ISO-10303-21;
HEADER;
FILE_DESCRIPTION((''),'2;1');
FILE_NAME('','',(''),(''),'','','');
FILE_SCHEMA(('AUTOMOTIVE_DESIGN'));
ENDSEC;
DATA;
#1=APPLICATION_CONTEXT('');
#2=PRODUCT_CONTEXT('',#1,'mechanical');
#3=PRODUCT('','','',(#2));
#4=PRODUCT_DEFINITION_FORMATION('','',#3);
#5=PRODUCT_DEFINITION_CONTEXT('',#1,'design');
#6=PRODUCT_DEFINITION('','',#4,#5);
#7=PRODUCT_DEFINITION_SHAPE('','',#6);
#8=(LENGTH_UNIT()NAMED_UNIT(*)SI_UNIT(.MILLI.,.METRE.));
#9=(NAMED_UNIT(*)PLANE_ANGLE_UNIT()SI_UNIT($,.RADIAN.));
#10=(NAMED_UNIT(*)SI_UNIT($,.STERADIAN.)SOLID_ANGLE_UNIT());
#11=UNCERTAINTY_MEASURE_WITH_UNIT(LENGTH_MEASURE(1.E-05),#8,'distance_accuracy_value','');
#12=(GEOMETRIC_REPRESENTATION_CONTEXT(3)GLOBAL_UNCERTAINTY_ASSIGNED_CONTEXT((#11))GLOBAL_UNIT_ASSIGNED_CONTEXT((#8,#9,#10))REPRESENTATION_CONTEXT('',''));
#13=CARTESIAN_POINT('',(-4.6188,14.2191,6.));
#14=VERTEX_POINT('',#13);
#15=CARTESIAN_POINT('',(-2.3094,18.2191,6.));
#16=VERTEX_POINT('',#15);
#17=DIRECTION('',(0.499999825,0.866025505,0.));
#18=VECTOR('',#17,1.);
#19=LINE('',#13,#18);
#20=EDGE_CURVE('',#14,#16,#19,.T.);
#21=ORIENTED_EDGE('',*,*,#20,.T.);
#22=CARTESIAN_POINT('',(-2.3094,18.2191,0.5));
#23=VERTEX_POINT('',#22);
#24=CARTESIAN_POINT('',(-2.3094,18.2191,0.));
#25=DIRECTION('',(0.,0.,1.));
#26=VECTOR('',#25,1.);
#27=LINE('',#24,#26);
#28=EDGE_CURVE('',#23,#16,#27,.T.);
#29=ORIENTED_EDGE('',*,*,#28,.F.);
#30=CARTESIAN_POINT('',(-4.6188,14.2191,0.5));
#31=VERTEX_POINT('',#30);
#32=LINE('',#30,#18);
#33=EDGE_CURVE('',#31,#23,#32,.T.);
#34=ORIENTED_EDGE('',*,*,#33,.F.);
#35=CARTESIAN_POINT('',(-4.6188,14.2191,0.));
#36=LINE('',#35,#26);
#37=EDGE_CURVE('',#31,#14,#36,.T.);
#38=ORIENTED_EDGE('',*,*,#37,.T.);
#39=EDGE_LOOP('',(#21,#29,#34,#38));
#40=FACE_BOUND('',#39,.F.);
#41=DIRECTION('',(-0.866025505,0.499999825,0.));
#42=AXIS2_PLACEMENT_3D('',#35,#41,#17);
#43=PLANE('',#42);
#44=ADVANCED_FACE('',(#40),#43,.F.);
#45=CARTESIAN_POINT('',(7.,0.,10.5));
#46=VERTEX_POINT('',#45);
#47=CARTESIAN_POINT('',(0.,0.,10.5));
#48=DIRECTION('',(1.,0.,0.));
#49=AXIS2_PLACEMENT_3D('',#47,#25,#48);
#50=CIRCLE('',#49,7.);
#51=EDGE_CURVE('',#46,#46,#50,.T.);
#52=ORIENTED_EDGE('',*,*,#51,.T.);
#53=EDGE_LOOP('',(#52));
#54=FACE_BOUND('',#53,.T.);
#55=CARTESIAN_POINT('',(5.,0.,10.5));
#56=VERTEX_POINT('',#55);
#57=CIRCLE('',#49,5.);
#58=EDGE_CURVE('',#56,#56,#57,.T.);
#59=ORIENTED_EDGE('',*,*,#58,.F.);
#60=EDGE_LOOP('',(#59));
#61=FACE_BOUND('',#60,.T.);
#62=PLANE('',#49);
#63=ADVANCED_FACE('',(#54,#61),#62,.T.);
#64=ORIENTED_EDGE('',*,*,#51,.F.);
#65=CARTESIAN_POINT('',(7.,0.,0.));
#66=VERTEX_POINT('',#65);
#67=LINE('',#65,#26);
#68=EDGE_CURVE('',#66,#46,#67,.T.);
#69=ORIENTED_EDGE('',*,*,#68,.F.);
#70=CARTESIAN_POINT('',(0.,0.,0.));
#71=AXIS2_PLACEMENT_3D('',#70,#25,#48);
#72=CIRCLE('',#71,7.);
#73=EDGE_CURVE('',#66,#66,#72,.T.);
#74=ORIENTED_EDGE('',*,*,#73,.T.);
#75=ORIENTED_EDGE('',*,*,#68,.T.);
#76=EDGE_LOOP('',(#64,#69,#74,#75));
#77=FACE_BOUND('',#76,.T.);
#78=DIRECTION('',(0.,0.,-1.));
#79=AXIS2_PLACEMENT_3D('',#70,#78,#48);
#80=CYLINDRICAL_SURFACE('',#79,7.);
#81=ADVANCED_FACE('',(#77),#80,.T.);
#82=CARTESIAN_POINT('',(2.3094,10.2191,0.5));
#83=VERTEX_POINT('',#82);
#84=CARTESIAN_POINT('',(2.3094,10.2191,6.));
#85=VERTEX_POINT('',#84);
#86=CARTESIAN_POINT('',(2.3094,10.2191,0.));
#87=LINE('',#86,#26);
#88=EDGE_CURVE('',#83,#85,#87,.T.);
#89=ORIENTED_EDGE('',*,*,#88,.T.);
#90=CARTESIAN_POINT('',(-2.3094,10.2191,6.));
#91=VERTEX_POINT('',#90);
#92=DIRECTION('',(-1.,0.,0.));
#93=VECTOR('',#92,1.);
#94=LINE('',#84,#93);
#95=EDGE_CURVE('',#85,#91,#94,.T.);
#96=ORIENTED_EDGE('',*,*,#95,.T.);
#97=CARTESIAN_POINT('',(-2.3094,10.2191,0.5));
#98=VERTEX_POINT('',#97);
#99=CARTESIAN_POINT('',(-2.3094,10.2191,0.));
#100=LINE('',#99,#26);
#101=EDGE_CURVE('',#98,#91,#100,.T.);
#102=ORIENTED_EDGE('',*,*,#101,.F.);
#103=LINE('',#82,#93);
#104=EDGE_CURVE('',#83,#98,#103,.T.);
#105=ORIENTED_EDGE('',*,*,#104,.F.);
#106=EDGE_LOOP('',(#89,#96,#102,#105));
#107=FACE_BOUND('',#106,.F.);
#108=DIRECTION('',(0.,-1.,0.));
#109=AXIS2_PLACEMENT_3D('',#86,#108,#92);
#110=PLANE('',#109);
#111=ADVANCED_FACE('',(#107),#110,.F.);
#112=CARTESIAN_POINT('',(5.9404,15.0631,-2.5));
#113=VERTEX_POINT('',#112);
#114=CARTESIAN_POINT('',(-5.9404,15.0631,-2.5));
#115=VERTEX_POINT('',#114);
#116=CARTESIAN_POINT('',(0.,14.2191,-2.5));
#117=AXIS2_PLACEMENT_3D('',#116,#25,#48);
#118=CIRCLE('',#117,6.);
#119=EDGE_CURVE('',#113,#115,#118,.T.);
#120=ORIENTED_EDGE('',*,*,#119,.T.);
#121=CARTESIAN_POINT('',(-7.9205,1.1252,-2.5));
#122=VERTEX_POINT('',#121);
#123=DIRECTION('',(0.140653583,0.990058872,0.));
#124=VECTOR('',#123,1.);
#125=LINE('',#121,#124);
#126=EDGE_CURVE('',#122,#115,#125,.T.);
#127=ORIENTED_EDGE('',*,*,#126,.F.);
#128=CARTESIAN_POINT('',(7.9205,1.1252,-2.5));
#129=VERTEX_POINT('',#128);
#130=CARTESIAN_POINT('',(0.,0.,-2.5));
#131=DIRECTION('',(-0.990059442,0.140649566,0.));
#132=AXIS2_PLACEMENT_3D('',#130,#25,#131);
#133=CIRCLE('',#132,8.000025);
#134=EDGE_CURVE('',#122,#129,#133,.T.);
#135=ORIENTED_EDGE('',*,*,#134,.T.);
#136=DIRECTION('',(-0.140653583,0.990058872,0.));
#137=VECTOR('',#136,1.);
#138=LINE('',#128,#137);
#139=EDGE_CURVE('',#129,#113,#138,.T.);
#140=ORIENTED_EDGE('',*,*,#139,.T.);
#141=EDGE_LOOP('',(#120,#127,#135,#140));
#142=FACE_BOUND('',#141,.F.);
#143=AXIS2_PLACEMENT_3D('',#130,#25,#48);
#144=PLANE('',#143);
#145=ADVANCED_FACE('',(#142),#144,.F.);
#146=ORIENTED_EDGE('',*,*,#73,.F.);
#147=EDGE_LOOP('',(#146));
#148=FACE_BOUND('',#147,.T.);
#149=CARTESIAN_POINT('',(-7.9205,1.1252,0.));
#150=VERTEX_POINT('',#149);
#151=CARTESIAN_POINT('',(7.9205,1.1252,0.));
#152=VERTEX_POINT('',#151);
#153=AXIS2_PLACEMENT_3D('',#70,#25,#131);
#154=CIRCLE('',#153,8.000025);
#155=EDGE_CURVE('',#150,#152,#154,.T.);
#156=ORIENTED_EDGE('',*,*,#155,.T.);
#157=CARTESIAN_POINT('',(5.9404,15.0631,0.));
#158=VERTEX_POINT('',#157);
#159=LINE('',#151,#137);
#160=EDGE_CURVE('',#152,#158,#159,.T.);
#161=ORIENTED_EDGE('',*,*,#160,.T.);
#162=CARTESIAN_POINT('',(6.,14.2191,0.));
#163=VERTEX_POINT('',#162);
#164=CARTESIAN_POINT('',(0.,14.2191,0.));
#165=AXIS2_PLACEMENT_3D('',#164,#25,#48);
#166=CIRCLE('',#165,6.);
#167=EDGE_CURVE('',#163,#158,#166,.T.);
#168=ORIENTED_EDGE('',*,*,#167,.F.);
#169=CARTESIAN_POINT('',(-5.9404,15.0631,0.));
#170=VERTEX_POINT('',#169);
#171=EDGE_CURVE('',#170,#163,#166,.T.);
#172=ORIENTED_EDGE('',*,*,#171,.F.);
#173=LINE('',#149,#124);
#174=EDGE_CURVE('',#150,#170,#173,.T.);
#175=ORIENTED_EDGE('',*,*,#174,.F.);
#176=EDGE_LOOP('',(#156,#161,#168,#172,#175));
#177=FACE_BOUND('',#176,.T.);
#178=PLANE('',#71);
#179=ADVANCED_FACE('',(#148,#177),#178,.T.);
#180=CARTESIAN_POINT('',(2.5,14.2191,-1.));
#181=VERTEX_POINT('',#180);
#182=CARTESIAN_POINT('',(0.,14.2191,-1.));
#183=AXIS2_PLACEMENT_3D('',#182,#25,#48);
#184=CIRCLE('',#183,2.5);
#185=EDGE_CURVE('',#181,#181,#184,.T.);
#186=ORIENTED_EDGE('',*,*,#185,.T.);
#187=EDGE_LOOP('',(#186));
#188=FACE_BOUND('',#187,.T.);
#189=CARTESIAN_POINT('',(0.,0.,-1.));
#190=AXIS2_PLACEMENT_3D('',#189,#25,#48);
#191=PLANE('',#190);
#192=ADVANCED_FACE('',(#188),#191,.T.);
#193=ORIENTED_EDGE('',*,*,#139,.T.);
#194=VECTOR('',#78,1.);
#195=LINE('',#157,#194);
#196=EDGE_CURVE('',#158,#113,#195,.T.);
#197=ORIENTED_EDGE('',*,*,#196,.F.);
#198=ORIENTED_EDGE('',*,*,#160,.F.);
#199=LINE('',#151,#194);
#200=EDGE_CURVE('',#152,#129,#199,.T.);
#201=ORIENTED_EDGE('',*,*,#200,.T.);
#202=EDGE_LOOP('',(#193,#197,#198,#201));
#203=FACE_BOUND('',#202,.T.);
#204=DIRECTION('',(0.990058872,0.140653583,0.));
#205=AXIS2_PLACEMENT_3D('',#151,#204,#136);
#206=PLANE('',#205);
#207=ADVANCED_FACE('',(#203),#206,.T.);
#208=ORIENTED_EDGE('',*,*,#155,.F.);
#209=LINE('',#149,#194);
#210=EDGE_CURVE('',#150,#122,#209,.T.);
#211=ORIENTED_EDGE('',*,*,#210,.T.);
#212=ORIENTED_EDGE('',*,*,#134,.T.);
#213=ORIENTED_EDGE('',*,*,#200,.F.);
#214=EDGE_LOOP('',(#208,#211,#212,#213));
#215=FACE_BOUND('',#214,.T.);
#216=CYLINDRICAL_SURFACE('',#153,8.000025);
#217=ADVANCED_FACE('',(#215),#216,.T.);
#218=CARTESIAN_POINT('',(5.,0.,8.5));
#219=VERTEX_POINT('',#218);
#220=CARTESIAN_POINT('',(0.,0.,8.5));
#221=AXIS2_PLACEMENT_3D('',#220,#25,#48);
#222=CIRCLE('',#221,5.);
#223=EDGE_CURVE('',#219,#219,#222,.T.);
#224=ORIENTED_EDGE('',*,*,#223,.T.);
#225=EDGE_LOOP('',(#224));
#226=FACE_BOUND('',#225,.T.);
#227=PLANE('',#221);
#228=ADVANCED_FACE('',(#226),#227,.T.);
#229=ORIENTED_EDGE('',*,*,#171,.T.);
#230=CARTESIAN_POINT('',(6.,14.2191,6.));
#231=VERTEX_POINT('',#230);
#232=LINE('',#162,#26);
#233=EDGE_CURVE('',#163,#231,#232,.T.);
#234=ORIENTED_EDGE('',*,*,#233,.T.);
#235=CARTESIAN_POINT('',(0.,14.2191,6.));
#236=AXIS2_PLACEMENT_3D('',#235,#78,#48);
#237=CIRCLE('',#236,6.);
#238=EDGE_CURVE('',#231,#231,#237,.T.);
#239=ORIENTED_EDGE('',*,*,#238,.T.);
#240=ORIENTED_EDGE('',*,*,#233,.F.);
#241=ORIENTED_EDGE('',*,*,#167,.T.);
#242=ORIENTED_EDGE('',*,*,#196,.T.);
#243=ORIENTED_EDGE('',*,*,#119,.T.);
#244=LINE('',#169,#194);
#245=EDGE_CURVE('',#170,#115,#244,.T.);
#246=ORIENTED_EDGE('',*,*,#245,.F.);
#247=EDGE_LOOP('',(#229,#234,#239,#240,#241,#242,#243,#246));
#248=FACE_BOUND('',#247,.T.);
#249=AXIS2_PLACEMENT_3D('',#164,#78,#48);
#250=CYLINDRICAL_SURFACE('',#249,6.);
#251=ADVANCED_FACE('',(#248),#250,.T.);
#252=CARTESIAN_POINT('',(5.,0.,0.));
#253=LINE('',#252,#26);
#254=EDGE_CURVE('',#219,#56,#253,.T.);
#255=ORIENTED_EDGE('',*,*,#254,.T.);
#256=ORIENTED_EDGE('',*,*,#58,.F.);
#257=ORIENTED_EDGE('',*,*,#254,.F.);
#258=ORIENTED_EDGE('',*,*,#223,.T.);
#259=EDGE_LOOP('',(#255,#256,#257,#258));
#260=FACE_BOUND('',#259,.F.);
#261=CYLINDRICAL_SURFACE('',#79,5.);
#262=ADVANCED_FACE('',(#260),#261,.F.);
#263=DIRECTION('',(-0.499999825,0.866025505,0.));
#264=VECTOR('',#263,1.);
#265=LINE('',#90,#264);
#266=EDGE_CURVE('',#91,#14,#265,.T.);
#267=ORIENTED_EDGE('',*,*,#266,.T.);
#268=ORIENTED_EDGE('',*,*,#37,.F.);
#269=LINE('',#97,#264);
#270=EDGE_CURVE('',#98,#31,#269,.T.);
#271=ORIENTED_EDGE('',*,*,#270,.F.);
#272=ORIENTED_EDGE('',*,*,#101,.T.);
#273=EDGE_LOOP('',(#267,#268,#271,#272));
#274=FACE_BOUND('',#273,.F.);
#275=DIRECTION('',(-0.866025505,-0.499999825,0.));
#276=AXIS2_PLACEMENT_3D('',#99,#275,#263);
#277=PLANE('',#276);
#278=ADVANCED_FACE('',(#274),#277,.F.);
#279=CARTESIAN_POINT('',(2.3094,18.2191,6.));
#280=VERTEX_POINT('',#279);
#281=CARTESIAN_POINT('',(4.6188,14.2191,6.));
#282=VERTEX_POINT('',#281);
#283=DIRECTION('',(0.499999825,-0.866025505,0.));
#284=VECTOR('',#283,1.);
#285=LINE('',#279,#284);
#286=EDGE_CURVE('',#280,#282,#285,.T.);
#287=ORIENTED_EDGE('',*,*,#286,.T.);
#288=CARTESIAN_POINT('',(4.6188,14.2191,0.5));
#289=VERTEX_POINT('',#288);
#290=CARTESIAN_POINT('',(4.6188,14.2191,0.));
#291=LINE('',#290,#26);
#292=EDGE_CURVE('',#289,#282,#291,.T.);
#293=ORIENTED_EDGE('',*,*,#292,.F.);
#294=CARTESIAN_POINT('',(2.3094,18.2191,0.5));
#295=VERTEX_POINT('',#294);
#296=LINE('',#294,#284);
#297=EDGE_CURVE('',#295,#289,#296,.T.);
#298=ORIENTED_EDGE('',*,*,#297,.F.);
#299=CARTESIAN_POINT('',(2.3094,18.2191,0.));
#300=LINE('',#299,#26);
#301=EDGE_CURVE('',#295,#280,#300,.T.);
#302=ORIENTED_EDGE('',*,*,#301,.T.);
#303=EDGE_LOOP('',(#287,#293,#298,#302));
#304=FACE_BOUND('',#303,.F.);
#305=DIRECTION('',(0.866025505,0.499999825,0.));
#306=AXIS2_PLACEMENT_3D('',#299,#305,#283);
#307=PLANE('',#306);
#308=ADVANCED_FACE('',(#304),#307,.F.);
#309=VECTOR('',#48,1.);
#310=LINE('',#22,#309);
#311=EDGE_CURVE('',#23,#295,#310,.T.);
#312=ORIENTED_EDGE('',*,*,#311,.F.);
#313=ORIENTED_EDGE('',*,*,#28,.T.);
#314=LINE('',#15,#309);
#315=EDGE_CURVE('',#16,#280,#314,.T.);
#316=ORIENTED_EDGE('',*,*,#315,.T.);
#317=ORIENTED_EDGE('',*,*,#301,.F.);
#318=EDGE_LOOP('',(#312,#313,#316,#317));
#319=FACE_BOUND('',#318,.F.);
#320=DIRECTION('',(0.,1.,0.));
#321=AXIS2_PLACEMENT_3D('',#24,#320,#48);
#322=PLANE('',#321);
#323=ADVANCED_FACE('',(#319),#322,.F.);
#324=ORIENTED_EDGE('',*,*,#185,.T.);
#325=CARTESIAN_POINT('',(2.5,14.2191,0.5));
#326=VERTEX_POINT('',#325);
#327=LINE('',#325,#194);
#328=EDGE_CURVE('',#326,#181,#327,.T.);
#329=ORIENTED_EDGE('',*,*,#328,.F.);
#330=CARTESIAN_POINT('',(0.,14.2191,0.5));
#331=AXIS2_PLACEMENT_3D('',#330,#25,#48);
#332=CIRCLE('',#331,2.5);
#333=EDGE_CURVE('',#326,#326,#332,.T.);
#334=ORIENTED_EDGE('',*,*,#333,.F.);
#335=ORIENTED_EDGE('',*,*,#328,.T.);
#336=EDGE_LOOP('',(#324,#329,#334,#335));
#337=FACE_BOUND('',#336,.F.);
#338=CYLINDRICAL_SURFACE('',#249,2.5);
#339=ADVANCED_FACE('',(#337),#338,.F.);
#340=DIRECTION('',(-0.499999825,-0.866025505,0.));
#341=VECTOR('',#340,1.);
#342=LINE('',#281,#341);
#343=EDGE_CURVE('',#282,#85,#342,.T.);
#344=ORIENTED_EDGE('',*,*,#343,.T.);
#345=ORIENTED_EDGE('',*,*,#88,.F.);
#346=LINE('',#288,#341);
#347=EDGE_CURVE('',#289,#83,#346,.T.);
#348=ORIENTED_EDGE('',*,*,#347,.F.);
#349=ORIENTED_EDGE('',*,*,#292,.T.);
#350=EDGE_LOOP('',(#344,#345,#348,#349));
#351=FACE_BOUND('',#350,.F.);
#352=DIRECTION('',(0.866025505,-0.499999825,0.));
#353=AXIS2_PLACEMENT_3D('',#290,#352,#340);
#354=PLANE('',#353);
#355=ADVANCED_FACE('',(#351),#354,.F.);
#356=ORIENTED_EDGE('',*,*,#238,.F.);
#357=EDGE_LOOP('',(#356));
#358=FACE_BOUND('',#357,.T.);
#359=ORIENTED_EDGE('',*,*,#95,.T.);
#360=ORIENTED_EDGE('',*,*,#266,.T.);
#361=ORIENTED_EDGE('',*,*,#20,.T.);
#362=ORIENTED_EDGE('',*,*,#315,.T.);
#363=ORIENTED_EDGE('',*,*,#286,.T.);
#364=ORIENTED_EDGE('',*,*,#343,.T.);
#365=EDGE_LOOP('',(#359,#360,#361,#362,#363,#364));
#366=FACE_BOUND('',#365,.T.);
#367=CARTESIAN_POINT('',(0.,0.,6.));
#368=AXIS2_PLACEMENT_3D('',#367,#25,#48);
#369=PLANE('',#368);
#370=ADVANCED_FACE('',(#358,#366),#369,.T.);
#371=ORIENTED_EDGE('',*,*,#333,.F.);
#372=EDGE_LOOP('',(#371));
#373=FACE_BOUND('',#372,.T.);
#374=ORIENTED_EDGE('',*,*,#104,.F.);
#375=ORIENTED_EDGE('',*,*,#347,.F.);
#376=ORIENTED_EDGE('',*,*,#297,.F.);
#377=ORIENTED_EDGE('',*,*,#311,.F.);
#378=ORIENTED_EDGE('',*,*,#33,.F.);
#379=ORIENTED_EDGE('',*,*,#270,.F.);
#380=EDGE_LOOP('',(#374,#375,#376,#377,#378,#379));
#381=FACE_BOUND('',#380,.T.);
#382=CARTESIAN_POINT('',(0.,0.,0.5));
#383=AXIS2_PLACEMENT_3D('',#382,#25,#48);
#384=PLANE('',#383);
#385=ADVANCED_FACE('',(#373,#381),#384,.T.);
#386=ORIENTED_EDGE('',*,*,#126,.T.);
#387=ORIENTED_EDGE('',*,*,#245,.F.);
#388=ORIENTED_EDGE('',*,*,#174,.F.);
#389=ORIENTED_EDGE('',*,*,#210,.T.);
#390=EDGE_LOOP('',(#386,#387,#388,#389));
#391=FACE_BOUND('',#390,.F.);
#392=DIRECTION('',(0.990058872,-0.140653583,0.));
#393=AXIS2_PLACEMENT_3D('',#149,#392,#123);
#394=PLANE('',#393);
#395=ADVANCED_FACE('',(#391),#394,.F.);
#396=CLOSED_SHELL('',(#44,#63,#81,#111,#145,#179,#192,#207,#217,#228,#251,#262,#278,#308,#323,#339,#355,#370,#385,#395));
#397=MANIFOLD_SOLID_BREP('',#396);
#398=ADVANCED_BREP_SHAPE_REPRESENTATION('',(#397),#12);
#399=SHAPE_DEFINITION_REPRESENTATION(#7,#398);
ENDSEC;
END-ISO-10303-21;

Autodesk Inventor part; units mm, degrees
ref_plane "YZ Plane" through (0, 0, 0) normal (1, 0, 0) x (0, 1, 0)
ref_plane "XZ Plane" through (0, 0, 0) normal (0, 1, 0) x (-1, 0, 0)
ref_plane "XY Plane" through (0, 0, 0) normal (0, 0, 1) x (1, 0, 0)
sketch "Эскиз1" plane through (0, 0, 0) normal (0, 0, 1) x (1, 0, 0)
  arc A0 (-7.9205, 1.1252) -> (7.9205, 1.1252) centre (0, 0) ccw
  circle A1 centre (0, 14.2191) radius 6
  line L0 (7.9205, 1.1252) -> (5.9404, 15.0631)
  line L1 (-7.9205, 1.1252) -> (-5.9404, 15.0631)
  circle A2 centre (0, 0) radius 7
  arc A3 (7.9205, 1.1252) -> (-7.9205, 1.1252) centre (0, 0) ccw construction
  circle A4 centre (0, 14.2191) radius 2.5
  line L2 (2.3094, 18.2191) -> (4.6188, 14.2191)
  line L3 (4.6188, 14.2191) -> (2.3094, 10.2191)
  line L4 (2.3094, 10.2191) -> (-2.3094, 10.2191)
  line L5 (-2.3094, 10.2191) -> (-4.6188, 14.2191)
  line L6 (-4.6188, 14.2191) -> (-2.3094, 18.2191)
  line L7 (-2.3094, 18.2191) -> (2.3094, 18.2191)
  circle A5 centre (0, 0) radius 5
  point P0 (-5.6643, 4.1129)
  point P1 (-6.8918, 1.226)
  point P2 (-6.9958, -0.2431)
  point P3 (-5.2611, 17.1038)
  point P4 (-5.7507, 15.9307)
  point P5 (-5.9065, 15.2742)
extrude "Выдавливание1" add sketch "Эскиз1" against normal blind 2.5 contours L1 A1 L0 A0 | A1 | A2 | A4 | L2 L3 L4 L5 L6 L7 | A5
extrude "Выдавливание2" cut sketch "Эскиз1" against normal blind 1 contours A4
extrude "Выдавливание3" add sketch "Эскиз1" along normal blind 6 contours A1
extrude "Выдавливание4" add sketch "Эскиз1" along normal blind 0.5 contours L2 L3 L4 L5 L6 L7
extrude "Выдавливание5" add sketch "Эскиз1" along normal blind 10.5 contours A2
extrude "Выдавливание7" add sketch "Эскиз1" along normal blind 8.5 contours A5
properties part number "Капсула"
